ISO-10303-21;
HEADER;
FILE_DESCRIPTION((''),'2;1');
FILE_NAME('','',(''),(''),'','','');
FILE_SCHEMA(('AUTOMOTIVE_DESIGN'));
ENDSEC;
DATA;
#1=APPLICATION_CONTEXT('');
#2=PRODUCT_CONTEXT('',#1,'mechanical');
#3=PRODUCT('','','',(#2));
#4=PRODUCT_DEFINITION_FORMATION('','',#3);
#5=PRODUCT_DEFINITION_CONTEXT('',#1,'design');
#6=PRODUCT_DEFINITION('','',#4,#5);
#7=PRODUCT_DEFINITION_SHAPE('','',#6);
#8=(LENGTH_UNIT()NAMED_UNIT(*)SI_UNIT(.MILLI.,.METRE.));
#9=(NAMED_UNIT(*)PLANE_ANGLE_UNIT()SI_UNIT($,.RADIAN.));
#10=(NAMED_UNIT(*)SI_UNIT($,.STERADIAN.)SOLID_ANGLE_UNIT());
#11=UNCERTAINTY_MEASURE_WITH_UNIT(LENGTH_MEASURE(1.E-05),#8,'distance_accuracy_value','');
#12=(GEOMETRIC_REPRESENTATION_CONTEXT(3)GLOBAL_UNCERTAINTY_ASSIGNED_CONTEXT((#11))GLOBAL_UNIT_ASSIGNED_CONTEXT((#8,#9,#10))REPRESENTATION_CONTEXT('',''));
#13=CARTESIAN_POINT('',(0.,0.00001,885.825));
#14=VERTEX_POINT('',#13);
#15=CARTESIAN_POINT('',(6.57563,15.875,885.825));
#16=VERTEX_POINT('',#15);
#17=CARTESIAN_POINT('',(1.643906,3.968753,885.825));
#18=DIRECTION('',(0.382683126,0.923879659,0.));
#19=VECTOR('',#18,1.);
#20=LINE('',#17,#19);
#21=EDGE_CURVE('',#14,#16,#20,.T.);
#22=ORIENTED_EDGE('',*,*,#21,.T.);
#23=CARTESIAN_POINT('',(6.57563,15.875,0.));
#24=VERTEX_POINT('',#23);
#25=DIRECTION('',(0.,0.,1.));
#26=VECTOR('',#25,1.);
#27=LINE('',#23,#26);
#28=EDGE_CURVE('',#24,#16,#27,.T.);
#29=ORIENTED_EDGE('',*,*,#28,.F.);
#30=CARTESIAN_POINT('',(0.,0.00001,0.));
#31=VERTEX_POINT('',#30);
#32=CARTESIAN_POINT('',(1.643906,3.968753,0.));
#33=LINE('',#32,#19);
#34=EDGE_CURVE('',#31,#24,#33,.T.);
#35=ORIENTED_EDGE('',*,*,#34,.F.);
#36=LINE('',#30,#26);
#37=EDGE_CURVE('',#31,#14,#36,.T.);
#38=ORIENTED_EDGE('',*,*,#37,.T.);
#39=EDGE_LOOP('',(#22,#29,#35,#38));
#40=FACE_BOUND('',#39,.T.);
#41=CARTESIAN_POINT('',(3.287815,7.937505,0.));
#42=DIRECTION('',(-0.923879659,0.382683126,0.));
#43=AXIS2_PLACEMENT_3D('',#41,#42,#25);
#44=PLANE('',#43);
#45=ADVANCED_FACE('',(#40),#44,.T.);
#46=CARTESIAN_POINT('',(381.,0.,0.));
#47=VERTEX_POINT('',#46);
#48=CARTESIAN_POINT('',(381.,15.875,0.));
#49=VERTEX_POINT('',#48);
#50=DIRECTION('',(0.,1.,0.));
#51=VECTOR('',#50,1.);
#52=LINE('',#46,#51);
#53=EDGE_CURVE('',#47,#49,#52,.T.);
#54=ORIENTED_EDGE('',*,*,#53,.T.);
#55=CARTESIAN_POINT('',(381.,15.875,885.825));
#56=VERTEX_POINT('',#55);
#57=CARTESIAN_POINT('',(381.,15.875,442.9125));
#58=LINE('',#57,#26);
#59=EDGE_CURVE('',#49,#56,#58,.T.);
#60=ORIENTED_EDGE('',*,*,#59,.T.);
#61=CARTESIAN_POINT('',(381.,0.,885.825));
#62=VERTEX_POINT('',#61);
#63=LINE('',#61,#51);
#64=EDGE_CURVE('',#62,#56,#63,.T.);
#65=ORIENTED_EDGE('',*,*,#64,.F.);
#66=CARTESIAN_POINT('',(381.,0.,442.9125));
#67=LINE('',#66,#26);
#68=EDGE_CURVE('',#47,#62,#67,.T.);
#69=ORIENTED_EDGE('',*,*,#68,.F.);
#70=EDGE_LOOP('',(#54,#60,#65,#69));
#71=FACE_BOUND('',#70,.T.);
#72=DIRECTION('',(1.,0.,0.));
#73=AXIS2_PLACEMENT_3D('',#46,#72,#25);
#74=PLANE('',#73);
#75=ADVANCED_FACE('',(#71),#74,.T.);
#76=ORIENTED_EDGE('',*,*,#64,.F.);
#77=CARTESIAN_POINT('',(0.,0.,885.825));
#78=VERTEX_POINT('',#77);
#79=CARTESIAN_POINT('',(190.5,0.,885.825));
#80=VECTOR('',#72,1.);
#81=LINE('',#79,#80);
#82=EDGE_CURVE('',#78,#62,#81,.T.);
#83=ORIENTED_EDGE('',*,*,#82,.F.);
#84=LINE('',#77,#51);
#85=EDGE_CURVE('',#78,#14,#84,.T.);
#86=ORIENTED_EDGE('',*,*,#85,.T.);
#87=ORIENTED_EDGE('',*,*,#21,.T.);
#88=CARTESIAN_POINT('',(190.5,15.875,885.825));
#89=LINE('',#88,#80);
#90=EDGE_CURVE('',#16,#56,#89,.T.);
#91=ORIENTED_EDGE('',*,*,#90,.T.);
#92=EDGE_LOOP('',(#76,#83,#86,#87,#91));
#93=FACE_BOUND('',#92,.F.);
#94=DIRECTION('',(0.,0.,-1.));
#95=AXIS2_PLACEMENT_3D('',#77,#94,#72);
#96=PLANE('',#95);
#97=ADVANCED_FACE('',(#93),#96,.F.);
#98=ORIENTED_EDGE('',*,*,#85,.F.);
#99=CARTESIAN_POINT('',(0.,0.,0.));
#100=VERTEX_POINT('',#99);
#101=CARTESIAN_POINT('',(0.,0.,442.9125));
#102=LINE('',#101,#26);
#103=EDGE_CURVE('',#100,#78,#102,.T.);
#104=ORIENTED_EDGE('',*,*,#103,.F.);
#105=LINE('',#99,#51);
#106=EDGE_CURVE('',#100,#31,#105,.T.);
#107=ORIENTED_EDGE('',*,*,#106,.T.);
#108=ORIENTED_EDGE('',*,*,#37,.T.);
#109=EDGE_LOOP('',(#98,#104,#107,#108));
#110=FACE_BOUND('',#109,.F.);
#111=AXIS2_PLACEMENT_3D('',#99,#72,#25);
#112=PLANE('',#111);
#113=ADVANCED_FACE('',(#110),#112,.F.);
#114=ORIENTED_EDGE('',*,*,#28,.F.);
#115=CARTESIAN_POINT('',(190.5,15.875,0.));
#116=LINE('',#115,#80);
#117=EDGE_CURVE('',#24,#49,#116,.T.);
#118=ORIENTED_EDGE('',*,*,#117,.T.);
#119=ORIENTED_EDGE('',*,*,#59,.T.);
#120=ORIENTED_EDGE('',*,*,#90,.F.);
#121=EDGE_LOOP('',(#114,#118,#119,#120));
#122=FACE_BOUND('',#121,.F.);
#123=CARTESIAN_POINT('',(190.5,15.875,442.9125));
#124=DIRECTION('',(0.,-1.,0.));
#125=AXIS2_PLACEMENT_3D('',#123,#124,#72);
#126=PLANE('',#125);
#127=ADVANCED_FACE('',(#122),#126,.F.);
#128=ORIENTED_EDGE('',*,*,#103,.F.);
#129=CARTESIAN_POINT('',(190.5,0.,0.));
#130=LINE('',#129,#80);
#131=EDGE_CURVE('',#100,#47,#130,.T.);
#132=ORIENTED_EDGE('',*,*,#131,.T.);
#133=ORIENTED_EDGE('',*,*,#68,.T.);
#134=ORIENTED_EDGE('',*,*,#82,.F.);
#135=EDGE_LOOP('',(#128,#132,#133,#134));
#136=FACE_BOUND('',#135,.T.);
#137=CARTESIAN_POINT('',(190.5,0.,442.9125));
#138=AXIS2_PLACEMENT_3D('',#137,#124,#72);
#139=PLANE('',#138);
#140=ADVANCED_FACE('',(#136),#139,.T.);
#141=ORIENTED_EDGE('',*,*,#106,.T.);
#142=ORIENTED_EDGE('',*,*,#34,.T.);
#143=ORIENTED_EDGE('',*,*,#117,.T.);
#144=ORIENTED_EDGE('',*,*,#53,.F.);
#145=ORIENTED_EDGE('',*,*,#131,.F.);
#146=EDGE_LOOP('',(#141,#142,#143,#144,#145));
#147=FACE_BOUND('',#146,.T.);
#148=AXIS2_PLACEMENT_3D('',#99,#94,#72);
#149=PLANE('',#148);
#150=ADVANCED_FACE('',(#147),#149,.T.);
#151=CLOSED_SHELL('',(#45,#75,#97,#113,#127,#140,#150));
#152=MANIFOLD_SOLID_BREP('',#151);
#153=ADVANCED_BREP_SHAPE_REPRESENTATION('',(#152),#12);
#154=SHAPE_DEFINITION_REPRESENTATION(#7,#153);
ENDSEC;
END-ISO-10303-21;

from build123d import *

# Parameters (mm, degrees)
F0_W     = 381
F0_H     = 885.825
F1_DEPTH = 15.875
F2_SIZE2 = 6.57563
F2_SIZE  = 15.87499


# Not quite as in the source:
# - a fillet or chamfer is up to 0.001 mm smaller than in the source, because OpenCascade refuses the exact size


with BuildPart() as f1:
    # F0 (on Front) → F1 (new body)
    with BuildSketch(Plane.XZ):
        with Locations((190.5, 442.9125)):
            Rectangle(F0_W, F0_H)
    extrude(amount=-F1_DEPTH)

    # F2 (size 15.875 and 6.5756403027 in the source; OpenCascade refuses exactly that, so slightly less here)
    f2_edges = [f1.edges().sort_by_distance(p)[0] for p in [
        (0, 15.875, 442.9125),
    ]]
    f2_side = f1.faces().sort_by_distance((0, 7.9375, 442.9125))[0]
    chamfer(f2_edges, length=F2_SIZE, length2=F2_SIZE2, reference=f2_side)


solid = f1.part
